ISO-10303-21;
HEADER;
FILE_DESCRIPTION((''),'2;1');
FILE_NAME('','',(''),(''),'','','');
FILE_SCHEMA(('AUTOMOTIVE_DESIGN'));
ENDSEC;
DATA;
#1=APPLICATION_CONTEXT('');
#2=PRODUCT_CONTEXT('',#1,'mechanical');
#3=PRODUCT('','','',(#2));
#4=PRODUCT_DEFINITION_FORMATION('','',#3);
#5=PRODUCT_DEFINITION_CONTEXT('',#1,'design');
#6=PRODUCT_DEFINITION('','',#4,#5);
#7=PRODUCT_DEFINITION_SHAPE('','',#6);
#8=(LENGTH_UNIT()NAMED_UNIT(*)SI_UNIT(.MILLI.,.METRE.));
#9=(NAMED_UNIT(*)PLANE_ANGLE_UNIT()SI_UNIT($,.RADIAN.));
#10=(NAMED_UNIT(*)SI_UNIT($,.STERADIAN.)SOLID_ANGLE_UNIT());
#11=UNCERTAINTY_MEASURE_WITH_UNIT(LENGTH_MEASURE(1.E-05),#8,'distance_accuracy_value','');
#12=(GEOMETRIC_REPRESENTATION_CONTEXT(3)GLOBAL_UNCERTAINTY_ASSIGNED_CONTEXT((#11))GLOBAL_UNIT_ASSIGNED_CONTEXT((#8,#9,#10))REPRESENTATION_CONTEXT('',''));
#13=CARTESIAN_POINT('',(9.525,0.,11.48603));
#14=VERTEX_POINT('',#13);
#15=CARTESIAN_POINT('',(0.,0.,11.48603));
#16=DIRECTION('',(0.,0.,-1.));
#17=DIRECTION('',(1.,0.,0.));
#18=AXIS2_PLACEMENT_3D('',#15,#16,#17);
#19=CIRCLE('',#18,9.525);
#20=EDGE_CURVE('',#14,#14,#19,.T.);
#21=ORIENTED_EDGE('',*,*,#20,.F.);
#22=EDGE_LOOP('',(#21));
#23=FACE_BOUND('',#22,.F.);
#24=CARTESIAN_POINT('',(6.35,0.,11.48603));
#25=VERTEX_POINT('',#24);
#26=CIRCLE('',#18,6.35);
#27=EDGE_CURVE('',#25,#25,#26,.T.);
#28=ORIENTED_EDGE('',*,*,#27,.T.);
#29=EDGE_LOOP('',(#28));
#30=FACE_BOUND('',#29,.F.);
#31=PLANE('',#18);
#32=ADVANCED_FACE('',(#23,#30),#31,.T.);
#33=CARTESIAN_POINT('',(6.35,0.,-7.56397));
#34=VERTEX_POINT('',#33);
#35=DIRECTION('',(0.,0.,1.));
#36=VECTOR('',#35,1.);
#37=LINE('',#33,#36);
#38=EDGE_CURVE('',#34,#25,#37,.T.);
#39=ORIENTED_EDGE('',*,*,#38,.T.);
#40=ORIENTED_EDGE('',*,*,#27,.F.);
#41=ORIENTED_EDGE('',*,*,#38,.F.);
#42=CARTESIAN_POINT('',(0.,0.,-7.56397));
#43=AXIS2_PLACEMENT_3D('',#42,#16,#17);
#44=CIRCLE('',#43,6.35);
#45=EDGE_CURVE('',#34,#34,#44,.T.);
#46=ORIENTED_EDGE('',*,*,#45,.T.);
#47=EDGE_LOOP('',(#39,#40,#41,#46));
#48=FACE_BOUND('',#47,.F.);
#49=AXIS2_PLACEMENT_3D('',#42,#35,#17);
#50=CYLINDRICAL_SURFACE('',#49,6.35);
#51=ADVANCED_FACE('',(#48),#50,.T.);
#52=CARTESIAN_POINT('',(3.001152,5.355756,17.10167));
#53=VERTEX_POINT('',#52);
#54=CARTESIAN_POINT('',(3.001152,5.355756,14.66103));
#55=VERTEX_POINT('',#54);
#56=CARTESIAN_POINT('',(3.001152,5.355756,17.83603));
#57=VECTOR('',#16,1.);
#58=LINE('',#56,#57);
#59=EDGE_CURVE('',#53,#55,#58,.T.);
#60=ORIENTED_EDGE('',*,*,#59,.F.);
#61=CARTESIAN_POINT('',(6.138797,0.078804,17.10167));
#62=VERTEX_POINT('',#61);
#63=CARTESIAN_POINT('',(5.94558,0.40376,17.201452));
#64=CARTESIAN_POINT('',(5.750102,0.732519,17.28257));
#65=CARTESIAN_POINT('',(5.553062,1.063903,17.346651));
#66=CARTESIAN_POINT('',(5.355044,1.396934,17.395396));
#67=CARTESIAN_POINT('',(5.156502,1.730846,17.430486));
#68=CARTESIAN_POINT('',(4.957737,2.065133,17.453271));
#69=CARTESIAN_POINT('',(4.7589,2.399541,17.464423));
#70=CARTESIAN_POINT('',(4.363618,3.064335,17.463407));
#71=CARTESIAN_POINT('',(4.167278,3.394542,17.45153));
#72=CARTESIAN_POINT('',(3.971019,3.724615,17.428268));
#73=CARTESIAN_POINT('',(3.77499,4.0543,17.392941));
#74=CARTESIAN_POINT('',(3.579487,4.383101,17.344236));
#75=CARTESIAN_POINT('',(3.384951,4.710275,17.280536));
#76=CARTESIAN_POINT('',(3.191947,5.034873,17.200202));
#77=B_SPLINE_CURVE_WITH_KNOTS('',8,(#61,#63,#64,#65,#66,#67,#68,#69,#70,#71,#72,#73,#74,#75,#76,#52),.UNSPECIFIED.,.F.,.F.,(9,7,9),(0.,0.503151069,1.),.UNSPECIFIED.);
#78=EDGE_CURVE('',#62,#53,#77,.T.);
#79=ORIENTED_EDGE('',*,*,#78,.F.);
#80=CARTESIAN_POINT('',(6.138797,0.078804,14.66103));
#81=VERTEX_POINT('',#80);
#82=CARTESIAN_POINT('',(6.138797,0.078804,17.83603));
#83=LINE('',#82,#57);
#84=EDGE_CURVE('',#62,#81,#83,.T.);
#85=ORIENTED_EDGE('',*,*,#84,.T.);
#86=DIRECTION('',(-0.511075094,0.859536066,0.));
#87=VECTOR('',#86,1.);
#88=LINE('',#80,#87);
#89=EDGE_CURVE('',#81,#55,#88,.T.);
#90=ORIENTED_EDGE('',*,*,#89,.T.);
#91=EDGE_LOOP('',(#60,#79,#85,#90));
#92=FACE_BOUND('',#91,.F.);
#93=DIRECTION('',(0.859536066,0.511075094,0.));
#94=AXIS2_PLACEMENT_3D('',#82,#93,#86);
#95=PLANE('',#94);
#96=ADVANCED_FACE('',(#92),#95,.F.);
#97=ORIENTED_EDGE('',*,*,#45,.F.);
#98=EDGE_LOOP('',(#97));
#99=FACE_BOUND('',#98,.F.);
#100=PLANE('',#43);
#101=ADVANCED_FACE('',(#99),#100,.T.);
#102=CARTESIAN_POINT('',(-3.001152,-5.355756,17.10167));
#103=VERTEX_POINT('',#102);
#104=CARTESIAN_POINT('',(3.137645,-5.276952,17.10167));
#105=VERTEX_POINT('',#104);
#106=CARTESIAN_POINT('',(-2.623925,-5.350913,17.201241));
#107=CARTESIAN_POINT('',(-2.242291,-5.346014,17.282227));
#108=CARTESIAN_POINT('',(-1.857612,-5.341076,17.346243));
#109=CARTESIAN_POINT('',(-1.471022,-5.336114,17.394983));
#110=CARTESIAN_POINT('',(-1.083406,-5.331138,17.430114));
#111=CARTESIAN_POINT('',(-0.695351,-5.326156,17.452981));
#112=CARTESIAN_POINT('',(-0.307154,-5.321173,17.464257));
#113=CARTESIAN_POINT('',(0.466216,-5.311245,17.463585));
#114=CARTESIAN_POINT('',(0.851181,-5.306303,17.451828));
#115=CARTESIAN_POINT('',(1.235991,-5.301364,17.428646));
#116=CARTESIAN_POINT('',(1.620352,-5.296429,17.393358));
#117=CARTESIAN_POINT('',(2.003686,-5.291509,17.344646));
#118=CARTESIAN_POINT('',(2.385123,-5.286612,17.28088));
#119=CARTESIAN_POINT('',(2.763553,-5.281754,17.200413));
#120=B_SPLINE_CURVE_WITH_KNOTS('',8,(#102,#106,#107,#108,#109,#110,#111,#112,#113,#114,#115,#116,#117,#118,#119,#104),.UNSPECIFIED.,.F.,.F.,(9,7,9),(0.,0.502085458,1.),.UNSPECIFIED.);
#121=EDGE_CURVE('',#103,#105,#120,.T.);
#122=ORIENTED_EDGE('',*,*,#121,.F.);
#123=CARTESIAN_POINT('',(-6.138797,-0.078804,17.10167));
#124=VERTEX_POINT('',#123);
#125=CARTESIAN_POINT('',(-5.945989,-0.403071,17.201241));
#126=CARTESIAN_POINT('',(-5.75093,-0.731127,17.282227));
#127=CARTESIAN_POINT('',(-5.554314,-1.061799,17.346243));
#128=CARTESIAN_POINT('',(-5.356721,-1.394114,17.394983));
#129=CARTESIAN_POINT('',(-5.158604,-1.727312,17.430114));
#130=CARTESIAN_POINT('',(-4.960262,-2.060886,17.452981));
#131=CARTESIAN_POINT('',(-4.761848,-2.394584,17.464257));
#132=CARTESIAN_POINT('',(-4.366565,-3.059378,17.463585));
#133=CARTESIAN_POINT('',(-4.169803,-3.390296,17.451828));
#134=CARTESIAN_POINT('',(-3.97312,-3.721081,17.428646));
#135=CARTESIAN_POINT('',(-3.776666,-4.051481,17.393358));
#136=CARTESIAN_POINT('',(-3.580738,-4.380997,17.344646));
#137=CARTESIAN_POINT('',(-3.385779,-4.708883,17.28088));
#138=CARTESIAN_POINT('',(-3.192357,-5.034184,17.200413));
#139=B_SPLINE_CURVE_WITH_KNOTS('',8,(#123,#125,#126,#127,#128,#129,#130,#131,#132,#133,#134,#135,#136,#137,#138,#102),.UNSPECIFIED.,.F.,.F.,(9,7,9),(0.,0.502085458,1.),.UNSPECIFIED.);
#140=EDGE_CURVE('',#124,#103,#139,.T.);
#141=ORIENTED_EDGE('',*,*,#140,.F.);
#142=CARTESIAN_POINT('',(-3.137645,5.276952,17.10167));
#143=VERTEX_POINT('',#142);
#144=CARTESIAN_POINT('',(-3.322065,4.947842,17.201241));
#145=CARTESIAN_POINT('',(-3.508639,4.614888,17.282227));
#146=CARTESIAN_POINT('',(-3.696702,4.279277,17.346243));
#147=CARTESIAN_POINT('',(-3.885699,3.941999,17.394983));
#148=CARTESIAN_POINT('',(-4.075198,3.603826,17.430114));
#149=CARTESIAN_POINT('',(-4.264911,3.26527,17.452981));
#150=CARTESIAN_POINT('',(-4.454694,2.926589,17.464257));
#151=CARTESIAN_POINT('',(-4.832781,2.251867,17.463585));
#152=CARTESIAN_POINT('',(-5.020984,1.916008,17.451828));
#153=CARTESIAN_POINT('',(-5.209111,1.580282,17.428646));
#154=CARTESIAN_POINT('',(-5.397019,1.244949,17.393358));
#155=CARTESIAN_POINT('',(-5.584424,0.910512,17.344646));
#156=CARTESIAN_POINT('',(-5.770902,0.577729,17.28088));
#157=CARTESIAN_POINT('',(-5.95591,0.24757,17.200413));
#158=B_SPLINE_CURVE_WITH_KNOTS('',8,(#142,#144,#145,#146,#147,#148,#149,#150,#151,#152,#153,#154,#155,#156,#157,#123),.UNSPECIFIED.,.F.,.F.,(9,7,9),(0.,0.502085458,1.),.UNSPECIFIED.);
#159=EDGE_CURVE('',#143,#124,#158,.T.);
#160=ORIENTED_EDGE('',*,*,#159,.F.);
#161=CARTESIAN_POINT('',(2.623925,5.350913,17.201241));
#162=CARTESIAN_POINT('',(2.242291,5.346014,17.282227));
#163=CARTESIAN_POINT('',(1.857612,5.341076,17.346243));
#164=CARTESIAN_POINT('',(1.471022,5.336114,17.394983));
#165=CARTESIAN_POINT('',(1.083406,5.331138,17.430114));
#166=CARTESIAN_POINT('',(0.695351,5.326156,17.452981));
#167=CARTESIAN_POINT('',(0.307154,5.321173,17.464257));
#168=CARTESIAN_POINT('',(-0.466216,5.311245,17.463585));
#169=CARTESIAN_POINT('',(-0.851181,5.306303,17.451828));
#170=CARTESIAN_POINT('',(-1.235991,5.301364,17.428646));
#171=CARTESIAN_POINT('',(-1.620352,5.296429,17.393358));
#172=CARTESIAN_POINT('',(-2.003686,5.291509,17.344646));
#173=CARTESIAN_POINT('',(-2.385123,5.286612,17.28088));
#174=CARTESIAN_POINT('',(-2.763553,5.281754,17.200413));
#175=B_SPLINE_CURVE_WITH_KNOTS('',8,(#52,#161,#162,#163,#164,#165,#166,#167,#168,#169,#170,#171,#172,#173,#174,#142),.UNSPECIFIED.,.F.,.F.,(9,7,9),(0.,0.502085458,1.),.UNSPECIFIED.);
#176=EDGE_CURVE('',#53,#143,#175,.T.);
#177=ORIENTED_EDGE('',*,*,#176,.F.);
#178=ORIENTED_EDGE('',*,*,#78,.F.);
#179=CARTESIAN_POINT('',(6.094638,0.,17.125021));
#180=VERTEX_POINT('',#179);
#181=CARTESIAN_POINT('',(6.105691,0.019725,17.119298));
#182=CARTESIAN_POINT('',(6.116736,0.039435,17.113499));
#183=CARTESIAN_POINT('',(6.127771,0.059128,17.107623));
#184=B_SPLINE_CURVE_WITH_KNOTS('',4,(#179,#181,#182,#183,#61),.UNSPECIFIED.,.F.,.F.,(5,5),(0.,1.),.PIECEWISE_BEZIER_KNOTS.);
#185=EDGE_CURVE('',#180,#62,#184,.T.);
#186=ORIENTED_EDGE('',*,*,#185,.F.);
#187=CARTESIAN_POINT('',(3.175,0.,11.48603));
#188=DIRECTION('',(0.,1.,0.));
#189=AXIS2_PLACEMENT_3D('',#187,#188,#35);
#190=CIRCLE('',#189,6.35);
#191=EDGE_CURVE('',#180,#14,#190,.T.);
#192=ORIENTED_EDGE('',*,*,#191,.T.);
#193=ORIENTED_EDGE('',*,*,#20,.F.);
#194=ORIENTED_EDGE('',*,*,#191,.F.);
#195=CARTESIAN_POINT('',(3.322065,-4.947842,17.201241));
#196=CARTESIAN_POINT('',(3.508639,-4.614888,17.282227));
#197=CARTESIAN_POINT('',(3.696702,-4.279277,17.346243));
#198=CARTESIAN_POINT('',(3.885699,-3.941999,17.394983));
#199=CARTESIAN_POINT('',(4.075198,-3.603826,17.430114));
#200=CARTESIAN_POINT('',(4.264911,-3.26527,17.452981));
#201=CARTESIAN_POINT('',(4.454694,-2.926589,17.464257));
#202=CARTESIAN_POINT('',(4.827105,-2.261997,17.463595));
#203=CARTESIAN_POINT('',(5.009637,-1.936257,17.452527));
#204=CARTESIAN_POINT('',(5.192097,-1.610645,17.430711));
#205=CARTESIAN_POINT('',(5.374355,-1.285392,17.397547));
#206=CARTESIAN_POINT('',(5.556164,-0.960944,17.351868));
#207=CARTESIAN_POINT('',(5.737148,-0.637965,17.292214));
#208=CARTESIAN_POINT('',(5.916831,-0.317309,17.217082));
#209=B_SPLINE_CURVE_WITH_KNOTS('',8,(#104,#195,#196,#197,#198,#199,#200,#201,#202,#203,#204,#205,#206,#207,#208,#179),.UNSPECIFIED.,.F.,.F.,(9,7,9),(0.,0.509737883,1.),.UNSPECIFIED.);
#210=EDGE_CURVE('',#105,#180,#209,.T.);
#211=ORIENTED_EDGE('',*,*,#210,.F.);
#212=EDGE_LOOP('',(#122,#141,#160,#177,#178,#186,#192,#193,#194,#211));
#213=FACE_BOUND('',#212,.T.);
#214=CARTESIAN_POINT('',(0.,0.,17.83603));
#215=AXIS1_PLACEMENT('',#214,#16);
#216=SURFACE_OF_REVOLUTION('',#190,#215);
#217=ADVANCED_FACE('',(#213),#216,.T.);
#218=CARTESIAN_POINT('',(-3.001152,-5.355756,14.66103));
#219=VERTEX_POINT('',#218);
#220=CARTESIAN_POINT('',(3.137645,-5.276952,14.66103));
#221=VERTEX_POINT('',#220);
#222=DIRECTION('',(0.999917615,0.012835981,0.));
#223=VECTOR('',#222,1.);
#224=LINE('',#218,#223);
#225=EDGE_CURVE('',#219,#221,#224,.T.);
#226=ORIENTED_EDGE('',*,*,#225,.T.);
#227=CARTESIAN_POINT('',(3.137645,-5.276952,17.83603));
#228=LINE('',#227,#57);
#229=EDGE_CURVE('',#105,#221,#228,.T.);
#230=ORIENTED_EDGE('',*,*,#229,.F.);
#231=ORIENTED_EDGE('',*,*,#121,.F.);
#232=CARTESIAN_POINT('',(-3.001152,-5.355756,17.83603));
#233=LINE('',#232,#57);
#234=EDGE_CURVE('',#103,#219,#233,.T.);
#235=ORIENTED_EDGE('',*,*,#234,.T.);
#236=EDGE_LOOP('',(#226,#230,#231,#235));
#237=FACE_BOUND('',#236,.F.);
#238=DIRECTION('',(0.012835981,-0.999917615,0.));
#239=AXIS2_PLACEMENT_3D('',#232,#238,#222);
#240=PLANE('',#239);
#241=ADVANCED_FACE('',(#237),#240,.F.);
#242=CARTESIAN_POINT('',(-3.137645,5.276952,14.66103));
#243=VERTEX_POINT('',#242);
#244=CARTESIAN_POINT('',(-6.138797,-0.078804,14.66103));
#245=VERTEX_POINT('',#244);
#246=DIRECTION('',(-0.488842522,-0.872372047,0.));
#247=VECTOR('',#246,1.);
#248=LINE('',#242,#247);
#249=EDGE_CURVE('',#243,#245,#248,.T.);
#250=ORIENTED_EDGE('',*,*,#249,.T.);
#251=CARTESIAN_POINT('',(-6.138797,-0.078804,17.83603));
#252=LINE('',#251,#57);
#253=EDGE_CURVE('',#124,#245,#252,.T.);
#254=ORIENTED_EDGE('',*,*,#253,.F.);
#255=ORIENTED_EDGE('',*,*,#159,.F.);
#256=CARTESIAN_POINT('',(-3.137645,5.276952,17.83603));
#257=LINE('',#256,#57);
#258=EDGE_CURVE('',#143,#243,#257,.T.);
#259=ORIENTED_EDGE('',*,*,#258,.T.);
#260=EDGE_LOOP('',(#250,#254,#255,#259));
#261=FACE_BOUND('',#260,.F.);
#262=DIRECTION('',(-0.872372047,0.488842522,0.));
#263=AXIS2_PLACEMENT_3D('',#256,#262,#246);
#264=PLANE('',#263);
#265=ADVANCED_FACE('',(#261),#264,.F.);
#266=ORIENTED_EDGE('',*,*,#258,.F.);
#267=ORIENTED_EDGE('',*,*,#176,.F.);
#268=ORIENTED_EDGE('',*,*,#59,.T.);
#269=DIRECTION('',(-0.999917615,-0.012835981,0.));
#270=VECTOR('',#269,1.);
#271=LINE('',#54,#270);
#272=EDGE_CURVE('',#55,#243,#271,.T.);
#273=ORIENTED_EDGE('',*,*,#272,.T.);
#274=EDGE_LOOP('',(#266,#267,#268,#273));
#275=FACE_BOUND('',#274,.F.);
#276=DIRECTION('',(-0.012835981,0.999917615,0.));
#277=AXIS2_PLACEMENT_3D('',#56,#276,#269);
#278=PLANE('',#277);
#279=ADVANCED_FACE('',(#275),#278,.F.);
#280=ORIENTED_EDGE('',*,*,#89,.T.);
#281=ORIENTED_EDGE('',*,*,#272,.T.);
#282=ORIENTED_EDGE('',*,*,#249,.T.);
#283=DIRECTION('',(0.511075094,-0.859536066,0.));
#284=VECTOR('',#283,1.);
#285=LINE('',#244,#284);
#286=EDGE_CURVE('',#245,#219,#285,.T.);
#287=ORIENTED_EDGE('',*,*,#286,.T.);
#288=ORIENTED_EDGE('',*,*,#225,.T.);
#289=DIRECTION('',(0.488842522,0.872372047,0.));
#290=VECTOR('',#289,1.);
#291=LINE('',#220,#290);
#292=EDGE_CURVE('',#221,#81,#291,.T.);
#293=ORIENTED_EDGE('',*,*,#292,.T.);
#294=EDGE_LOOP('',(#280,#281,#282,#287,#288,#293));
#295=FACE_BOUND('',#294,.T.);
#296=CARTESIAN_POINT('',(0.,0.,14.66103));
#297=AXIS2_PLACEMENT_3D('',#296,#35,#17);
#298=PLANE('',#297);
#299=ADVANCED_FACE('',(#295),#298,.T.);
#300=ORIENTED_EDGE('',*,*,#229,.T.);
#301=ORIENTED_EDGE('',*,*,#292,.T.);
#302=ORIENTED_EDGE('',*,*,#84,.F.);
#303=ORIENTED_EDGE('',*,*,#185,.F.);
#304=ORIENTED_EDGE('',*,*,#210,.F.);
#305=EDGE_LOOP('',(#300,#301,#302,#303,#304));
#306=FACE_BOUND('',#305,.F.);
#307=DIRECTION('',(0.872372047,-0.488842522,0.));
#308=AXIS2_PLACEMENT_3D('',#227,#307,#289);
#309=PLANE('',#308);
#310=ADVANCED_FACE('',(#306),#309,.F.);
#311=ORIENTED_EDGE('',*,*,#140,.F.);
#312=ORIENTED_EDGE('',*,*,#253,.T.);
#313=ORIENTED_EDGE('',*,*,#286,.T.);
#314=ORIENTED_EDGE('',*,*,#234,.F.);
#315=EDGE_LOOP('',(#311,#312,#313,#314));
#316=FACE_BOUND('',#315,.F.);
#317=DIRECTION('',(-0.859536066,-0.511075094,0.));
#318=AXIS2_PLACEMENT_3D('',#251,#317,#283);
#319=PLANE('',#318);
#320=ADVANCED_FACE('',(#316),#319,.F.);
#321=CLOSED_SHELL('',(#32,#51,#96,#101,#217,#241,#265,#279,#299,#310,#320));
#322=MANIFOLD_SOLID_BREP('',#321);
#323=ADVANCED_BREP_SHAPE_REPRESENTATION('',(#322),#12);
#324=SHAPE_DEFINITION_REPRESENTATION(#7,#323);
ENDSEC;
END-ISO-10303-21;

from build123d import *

# Parameters (mm, degrees)
F3_DEPTH = 3.175


# Not quite as in the source:
# - a fillet or chamfer that OpenCascade refuses, or shapes differently, is made with other operations: its cross-section is extruded or revolved along the edge and cut away or added


with BuildPart() as f1:
    # F0 (on Front) → F1 (revolve)
    with BuildSketch(Plane.XZ):
        Polygon((9.525, 17.8360301112), (0, 17.8360301112), (0, -7.5639698888), (6.35, -7.5639698888), (6.35, 11.4860301112), (9.525, 11.4860301112), align=None)
    revolve(axis=Axis((0, 0, 2.9950272292), (0, 0, -1)))

    # F2 (on face) → F3 (cut)
    with BuildSketch(Plane.XY.offset(17.8360301112)):
        Polygon((-3.001152127, -5.3557559125), (3.1376446132, -5.2769519389), (6.1387967402, 0.0788039736), (3.001152127, 5.3557559125), (-3.1376446132, 5.2769519389), (-6.1387967402, -0.0788039736), align=None)
    extrude(amount=-F3_DEPTH, mode=Mode.SUBTRACT)

    # F4: fillet of radius 6.35 on 1 edges, made by hand

    # F4_s1 → F4_t2 (revolve, cut)
    with BuildSketch(Plane.XZ):
        with BuildLine():
            ThreePointArc((3.175, 17.8360301112), (7.6651280605, 15.9761581718), (9.525, 11.4860301112))
            Line((9.525, 11.4860301112), (9.525, 17.8360301112))
            Line((9.525, 17.8360301112), (3.175, 17.8360301112))
        make_face()
    revolve(axis=Axis((0, 0, 17.8360301112), (0, 0, -1)), mode=Mode.SUBTRACT)


solid = f1.part
